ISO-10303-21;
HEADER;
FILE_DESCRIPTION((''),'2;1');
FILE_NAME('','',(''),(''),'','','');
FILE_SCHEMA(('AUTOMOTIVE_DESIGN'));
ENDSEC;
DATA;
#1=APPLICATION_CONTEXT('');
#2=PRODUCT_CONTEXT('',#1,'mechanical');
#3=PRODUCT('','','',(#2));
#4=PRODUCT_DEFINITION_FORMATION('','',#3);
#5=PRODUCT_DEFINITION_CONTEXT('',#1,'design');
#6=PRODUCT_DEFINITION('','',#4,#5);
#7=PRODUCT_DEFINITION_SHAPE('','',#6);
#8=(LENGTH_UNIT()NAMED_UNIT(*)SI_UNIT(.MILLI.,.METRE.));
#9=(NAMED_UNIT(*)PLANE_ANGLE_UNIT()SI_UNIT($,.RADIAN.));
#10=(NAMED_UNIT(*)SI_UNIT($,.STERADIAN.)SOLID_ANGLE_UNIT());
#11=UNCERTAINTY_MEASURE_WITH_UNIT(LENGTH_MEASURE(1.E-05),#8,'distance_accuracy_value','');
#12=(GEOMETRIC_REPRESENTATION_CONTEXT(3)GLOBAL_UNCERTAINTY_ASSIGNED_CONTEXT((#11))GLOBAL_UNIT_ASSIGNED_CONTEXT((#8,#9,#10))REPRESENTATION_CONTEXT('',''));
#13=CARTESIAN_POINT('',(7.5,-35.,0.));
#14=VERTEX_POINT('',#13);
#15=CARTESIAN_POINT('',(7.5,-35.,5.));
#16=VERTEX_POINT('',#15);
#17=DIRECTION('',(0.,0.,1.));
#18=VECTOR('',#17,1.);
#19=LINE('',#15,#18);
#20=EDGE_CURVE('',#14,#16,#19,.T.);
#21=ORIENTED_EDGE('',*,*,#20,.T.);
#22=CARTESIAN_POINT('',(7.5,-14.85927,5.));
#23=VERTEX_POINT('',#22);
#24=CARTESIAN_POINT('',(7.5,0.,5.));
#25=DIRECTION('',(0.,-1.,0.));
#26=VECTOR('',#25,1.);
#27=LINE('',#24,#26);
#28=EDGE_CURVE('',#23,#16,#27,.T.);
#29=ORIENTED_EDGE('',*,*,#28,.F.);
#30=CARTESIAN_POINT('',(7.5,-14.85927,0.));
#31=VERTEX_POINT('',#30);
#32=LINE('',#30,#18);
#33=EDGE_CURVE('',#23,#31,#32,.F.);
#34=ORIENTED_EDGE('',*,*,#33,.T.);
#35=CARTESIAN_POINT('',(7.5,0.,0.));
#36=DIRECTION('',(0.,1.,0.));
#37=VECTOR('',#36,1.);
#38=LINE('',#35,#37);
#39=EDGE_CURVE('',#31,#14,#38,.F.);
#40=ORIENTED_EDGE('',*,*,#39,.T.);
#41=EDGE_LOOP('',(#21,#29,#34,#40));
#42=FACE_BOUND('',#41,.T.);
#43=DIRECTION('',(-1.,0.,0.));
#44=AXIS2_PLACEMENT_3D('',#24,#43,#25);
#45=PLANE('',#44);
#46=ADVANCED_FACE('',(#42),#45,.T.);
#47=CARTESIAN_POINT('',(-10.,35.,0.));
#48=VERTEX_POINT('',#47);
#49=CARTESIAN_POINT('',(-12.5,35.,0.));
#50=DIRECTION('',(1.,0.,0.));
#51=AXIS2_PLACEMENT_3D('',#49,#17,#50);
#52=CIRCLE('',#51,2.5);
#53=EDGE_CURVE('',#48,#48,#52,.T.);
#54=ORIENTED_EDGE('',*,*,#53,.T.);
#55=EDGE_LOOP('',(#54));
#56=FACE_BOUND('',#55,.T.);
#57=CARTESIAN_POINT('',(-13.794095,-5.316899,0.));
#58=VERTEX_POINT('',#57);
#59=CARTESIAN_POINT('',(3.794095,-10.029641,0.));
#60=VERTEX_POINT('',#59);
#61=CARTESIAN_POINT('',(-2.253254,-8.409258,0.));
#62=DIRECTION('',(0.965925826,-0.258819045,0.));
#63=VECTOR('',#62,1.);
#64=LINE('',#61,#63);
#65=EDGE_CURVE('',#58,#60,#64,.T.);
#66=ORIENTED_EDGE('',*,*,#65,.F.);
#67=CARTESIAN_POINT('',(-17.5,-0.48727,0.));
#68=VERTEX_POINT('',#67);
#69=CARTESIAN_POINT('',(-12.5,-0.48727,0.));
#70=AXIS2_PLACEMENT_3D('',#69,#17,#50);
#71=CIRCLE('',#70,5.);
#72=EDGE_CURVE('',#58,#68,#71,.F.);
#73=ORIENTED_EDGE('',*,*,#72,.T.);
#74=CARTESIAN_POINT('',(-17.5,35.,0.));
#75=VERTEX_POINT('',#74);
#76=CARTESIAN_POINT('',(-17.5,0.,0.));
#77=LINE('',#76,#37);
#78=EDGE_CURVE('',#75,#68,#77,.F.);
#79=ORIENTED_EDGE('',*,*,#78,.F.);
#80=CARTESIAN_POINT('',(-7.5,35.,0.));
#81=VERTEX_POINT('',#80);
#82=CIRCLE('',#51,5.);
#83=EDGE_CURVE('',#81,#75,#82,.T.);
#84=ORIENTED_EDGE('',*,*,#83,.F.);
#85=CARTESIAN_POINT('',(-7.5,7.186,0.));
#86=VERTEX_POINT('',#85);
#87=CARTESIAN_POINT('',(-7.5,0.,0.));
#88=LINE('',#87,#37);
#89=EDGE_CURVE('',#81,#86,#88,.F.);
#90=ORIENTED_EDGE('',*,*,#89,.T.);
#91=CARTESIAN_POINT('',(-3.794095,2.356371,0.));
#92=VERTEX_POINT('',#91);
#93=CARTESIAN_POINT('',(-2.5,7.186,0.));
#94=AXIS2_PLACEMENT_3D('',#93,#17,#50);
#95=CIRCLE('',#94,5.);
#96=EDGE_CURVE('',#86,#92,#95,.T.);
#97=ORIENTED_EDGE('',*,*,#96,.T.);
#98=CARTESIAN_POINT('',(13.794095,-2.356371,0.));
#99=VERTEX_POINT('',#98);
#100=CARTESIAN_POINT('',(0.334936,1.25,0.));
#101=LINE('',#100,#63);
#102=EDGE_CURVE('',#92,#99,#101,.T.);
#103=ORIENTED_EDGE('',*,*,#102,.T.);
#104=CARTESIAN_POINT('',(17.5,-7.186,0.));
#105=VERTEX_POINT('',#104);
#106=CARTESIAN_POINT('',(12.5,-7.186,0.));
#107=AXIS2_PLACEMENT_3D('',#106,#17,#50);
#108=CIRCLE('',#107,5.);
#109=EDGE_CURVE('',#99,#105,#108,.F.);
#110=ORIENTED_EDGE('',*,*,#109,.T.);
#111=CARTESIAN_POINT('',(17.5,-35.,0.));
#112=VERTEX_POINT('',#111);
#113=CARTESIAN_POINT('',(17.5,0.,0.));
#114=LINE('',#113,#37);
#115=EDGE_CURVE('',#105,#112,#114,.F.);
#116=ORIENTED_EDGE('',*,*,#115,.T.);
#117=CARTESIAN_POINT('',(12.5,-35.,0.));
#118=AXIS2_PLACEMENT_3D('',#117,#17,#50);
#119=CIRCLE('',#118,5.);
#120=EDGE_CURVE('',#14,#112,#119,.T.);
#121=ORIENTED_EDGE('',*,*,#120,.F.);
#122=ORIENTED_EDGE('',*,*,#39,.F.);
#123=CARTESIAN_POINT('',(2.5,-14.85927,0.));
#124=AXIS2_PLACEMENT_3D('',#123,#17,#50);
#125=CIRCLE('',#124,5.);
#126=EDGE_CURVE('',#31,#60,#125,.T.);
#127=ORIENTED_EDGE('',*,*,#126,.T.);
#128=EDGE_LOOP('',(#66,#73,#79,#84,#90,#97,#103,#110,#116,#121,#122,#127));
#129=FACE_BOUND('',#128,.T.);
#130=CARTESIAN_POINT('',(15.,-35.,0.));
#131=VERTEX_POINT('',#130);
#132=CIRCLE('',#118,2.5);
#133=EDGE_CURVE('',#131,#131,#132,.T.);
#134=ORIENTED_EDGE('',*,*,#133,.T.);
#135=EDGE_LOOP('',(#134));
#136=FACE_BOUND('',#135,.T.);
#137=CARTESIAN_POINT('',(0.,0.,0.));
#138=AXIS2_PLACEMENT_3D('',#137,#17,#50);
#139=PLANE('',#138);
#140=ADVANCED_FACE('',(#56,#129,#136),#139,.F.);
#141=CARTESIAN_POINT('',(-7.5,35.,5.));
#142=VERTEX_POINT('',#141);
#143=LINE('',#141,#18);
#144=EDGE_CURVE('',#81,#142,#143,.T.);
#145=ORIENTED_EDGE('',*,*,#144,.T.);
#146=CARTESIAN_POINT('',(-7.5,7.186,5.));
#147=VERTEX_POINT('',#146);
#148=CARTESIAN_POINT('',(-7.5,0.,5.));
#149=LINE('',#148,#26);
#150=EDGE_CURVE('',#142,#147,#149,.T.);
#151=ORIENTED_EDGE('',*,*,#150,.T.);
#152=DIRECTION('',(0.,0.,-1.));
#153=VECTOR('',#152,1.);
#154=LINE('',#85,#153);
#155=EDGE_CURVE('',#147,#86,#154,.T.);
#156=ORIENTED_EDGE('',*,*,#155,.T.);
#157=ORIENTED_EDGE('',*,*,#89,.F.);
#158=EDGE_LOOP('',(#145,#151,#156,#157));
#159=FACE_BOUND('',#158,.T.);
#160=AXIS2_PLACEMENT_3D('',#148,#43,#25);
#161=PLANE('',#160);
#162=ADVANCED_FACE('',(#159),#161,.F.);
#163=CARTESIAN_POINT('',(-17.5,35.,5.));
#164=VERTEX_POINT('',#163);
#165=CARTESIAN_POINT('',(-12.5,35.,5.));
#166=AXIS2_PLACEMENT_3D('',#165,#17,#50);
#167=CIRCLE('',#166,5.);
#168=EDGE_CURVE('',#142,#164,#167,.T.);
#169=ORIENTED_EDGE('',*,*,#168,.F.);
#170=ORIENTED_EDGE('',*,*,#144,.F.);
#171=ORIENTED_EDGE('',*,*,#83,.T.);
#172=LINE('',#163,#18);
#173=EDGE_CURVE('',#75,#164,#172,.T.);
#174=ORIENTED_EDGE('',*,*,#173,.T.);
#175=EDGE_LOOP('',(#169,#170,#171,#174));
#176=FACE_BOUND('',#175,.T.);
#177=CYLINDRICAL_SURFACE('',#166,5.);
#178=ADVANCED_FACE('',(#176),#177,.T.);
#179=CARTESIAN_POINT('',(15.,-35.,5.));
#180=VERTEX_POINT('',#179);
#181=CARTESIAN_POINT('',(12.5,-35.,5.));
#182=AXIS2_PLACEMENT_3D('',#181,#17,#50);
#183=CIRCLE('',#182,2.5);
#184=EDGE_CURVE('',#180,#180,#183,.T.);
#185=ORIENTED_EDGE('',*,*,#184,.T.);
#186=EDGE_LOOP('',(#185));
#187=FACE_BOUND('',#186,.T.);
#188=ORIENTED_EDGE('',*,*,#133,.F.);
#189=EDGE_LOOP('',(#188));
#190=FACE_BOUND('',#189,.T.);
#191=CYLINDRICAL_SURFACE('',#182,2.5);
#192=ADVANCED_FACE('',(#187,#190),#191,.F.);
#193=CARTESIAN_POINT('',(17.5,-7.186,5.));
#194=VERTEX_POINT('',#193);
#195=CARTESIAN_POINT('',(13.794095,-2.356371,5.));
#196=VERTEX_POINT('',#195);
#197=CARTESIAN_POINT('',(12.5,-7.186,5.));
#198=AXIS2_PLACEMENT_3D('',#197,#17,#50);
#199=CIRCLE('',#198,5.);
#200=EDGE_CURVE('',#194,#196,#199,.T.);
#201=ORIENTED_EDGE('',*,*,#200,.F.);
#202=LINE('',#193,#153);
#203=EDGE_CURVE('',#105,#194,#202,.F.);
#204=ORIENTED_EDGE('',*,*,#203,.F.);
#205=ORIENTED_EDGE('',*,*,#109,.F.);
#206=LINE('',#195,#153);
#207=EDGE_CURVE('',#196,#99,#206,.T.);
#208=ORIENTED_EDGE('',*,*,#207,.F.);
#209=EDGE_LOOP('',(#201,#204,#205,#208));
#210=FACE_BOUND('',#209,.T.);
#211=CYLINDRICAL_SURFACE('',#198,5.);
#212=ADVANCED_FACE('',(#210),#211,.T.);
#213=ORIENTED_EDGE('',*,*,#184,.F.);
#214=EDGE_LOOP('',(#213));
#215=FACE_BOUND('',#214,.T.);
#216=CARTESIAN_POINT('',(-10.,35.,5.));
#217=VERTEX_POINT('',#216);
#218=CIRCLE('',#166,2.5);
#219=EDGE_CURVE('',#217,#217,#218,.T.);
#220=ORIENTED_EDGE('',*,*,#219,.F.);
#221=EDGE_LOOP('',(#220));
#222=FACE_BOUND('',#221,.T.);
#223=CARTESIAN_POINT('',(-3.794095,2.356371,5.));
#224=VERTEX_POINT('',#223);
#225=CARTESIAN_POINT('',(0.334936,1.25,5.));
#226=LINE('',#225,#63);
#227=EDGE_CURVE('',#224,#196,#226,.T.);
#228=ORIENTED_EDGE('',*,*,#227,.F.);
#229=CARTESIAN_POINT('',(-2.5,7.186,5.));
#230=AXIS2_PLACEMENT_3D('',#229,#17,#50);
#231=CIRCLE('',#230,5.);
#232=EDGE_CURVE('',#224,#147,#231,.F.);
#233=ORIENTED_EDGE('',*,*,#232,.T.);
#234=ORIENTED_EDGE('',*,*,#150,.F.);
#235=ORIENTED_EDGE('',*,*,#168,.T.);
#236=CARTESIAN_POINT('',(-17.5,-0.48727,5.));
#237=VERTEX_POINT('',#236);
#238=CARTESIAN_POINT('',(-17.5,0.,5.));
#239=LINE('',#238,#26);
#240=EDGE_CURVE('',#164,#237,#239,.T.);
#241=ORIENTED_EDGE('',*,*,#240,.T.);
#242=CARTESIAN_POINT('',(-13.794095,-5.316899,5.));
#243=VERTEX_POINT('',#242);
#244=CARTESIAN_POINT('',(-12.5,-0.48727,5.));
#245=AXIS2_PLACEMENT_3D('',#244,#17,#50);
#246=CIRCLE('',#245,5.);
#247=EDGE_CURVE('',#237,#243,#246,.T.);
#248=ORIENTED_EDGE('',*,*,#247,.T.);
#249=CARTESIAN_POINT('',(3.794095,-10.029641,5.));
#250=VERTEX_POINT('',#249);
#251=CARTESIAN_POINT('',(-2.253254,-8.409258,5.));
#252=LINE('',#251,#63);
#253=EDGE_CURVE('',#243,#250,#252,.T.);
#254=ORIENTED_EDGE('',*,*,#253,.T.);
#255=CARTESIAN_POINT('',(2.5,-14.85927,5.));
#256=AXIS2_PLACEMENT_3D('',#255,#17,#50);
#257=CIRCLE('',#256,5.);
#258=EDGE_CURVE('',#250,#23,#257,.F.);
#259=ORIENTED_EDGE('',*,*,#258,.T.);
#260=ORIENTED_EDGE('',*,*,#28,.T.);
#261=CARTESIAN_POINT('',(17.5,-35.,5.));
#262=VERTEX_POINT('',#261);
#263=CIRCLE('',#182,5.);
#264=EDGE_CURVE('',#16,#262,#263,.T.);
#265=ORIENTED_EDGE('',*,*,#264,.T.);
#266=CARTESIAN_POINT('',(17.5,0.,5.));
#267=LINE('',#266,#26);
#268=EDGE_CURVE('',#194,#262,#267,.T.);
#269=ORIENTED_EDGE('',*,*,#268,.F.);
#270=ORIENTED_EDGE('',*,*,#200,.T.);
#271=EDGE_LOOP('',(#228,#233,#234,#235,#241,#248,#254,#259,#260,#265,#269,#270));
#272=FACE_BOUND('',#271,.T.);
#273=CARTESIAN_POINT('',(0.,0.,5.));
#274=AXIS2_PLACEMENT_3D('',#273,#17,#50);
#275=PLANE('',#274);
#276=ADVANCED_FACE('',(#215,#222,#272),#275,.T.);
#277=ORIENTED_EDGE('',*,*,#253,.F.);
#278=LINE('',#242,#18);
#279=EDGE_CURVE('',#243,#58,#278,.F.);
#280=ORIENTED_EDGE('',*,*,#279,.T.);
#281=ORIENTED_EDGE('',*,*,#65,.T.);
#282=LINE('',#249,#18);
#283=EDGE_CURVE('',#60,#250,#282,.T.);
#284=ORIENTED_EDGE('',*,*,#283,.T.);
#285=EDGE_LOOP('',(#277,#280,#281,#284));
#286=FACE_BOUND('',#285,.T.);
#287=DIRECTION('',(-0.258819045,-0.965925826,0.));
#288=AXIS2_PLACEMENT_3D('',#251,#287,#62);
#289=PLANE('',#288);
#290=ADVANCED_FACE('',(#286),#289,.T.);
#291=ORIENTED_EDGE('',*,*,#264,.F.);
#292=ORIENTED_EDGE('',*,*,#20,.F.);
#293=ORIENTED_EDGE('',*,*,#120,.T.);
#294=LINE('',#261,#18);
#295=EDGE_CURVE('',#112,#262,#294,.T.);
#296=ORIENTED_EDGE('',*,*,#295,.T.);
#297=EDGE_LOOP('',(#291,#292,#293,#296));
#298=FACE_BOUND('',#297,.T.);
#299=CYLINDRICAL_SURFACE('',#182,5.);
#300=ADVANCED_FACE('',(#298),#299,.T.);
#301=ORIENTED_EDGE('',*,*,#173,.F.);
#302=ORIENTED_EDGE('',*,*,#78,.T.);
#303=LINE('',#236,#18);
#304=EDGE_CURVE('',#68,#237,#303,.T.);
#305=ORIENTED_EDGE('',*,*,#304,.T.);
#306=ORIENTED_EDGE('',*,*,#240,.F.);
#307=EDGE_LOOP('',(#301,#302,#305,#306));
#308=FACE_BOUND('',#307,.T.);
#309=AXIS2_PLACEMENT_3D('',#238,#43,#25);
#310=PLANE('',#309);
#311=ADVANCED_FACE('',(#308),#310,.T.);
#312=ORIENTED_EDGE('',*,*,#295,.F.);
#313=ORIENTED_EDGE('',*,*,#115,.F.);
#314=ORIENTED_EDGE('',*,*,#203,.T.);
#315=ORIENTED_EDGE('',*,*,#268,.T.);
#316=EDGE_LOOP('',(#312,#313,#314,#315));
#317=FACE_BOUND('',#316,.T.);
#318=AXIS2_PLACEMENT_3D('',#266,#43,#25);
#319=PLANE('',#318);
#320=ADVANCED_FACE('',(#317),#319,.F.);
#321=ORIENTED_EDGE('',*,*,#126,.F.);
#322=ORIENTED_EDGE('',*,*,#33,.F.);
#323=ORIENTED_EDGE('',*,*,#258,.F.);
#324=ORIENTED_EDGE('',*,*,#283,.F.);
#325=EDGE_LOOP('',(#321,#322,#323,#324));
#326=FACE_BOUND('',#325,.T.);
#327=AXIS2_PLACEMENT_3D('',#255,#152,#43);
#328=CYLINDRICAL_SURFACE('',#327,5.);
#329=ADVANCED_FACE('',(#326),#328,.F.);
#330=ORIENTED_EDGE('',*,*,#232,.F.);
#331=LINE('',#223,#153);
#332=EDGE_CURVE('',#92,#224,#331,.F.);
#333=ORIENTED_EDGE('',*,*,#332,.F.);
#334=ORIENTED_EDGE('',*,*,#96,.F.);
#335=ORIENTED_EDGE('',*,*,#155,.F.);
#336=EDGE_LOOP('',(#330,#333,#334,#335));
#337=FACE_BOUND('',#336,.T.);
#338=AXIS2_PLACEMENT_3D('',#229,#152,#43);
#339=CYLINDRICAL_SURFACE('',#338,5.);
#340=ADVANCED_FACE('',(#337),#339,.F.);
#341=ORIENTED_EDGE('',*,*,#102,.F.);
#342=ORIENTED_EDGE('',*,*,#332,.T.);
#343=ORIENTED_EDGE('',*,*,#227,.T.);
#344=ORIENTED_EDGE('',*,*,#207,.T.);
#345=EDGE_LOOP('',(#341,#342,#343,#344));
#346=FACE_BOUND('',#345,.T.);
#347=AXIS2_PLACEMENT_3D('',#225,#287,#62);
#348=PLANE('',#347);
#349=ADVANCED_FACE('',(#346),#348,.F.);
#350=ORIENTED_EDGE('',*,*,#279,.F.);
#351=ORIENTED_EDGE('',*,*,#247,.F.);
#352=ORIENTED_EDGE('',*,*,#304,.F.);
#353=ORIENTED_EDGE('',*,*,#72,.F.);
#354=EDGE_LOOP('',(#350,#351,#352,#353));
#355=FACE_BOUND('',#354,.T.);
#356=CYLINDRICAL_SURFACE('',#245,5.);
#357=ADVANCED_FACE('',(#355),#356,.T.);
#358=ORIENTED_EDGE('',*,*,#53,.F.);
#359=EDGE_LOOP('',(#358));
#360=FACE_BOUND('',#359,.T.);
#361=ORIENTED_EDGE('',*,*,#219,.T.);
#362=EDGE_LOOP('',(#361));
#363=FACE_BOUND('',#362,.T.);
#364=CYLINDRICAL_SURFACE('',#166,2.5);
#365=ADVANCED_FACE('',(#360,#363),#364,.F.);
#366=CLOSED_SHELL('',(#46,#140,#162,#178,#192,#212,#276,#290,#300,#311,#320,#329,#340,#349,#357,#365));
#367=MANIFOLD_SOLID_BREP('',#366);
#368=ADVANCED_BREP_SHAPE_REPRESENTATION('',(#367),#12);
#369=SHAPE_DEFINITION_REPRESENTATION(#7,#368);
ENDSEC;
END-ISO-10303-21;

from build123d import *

# Parameters (mm, degrees)
SKETCH1_R           = 5
SKETCH1_R_2         = 2.5
BOSS_EXTRUDE1_DEPTH = 5
FILLET1_R           = 5


with BuildPart() as part:
    # Sketch1 → Boss-Extrude1 (new body)
    # profile 1 of 3: a face of its own
    with BuildSketch(Plane.XY):
        with BuildLine():
            Line((-7.5, 3.349364905), (-7.5, 35))
            ThreePointArc((-7.5, 35), (-12.5, 30), (-17.5, 35))
            Line((-17.5, 35), (-17.5, -4.323904974))
            Line((-17.5, -4.323904974), (7.5, -11.022634785))
            Line((7.5, -11.022634785), (7.5, -35))
            ThreePointArc((7.5, -35), (12.5, -30), (17.5, -35))
            Line((17.5, -35), (17.5, -3.349364905))
            Line((17.5, -3.349364905), (-7.5, 3.349364905))
        make_face()
    # profile 2 of 3: a face of its own
    with BuildSketch(Plane.XY):
        with Locations((-12.5, 35)):
            Circle(SKETCH1_R)
        with Locations((-12.5, 35)):
            Circle(SKETCH1_R_2, mode=Mode.SUBTRACT)
    # profile 3 of 3: a face of its own
    with BuildSketch(Plane.XY):
        with Locations((12.5, -35)):
            Circle(SKETCH1_R)
        with Locations((12.5, -35)):
            Circle(SKETCH1_R_2, mode=Mode.SUBTRACT)
    extrude(amount=BOSS_EXTRUDE1_DEPTH)

    # Fillet1
    fillet1_edges = [part.edges().sort_by_distance(p)[0] for p in [
        (-7.5, 3.349364905, 2.5),
        (17.5, -3.349364905, 2.5),
        (7.5, -11.022634785, 2.5),
        (-17.5, -4.323904974, 2.5),
    ]]
    fillet(fillet1_edges, radius=FILLET1_R)


solid = part.part
